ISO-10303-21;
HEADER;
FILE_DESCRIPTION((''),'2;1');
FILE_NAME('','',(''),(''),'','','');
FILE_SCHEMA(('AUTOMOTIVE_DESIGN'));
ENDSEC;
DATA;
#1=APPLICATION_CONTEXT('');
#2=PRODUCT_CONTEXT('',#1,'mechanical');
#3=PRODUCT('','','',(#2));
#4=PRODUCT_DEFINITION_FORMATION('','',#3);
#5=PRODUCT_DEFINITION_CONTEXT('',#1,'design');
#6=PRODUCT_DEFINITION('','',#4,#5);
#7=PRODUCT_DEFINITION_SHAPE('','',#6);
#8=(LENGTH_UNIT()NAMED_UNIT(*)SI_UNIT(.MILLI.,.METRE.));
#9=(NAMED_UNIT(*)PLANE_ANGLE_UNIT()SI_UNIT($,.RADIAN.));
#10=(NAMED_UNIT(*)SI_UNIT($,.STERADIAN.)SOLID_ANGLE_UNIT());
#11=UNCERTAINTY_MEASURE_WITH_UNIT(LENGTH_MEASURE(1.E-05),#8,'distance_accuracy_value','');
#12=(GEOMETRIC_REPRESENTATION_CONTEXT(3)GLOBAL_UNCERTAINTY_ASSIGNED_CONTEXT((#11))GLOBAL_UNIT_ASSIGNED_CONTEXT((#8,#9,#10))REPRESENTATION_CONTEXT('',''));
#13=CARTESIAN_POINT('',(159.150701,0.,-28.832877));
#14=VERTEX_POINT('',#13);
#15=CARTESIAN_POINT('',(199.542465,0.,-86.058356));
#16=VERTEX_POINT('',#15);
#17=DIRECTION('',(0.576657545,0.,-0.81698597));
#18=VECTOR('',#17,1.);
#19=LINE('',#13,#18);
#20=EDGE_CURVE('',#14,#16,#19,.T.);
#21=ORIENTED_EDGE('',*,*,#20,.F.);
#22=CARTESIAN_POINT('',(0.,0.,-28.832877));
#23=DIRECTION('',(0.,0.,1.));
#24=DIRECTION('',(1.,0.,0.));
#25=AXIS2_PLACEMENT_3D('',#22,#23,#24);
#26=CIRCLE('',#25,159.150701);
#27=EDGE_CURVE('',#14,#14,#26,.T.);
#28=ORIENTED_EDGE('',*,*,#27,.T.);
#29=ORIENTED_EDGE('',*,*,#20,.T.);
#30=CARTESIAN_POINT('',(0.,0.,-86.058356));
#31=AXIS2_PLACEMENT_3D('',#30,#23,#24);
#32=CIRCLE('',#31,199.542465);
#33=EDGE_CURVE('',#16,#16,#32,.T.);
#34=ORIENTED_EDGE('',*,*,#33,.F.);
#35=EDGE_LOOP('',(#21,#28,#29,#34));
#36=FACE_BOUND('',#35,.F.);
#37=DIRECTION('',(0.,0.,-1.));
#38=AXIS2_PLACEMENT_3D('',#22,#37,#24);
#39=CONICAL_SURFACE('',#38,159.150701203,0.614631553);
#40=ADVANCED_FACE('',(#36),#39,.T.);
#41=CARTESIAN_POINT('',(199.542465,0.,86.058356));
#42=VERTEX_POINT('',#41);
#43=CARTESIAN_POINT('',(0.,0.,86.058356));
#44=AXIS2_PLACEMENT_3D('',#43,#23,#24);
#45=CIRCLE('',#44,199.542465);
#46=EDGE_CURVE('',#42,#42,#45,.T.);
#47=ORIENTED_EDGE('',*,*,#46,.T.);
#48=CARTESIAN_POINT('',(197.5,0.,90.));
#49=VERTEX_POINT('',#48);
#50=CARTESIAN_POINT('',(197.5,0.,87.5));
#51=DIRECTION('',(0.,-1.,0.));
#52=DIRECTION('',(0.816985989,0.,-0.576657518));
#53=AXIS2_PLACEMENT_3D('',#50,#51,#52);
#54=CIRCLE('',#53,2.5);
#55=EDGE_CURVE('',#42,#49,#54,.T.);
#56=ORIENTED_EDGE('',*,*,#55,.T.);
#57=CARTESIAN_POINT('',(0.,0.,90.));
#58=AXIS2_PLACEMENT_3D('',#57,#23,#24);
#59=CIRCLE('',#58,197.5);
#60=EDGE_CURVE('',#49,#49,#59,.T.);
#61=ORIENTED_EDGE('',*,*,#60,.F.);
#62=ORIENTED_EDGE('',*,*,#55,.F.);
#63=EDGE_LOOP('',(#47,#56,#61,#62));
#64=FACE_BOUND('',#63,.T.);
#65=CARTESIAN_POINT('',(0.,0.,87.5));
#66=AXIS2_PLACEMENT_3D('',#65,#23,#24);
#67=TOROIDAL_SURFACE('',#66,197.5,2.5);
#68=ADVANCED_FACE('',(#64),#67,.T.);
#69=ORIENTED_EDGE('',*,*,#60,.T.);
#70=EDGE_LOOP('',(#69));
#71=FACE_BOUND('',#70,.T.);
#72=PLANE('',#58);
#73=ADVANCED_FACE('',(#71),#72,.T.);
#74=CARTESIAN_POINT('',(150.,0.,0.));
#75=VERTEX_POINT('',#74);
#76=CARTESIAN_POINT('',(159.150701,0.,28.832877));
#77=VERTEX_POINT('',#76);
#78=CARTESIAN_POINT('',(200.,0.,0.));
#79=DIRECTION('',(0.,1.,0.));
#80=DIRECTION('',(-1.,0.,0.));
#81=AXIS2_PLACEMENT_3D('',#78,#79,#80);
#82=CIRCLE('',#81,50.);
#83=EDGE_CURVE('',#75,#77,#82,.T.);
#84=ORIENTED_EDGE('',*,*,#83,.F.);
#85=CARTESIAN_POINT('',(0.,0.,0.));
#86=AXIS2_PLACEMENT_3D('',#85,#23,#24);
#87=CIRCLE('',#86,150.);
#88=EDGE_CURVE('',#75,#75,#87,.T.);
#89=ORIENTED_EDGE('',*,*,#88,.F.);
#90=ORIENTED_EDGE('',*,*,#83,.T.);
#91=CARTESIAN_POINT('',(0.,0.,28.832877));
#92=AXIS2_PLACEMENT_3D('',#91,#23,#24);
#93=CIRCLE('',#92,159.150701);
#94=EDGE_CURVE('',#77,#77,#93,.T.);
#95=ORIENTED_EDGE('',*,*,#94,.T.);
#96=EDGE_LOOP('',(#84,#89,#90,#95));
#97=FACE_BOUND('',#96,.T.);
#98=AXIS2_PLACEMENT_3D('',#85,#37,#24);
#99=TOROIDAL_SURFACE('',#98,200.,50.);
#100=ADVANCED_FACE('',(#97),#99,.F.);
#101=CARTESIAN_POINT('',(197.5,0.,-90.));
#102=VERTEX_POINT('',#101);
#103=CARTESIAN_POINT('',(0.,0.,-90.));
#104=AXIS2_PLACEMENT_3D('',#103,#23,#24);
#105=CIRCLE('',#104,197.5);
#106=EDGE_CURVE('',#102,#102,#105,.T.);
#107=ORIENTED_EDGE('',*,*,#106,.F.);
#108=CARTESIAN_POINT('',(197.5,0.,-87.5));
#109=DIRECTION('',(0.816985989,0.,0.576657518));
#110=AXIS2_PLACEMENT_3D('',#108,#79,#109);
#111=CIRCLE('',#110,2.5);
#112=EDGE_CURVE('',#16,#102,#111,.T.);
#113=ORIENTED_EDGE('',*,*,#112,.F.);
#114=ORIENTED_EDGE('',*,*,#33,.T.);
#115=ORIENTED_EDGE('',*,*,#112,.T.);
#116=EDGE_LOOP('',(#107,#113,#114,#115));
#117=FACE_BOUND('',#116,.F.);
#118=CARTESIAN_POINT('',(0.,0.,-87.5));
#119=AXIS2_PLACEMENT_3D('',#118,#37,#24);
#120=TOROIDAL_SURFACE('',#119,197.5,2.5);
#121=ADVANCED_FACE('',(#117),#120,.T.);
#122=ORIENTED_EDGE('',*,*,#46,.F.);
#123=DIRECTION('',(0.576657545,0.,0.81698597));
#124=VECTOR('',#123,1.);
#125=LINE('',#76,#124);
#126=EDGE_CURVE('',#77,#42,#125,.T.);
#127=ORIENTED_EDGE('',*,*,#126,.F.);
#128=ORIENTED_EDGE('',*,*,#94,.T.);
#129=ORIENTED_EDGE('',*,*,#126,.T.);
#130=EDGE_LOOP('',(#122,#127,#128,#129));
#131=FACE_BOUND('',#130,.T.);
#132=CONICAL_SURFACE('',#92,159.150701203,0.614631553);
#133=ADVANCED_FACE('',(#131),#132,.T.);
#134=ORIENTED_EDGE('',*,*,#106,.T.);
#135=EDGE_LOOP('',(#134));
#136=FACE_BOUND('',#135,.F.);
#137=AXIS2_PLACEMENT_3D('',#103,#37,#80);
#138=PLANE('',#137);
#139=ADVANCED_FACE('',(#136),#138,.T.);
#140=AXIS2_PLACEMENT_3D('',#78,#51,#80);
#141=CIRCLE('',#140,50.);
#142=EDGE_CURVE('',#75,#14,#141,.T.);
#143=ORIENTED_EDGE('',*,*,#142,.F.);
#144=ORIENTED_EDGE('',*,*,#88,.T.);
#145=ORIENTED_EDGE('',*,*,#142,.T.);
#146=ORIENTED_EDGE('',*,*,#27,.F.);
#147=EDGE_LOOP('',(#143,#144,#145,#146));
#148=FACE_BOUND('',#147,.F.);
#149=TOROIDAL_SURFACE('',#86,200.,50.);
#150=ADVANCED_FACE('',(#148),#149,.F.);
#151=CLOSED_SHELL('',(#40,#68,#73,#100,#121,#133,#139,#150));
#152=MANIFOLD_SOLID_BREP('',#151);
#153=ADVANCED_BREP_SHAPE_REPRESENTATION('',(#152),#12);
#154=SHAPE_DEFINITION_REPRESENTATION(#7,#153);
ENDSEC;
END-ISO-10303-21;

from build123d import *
from build123d import SkipClean  # not in build123d's __all__


# Not quite as in the source:
# - ends of sketch curves that miss each other by under 0.0002 mm in the source are joined


with BuildPart() as f1:
    # F0 (on Front) → F1 (revolve)
    with BuildSketch(Plane.XZ):
        with BuildLine():
            ThreePointArc((150, 0), (152.3425507406, 15.1250629778), (159.1507012033, 28.8328768565))
            Line((159.1507012033, 28.8328768565), (199.542465, 86.058356))
            ThreePointArc((199.542465, 86.058356), (199.7196970287, 88.6501935058), (197.5, 90))
            Line((197.5, 90), (0, 90))
            Line((0, 90), (0, 0))
            Line((0, 0), (150, 0))
        make_face()
    revolve(axis=Axis((0, 0, 45), (0, 0, 1)))

    # F2: F1 across face


with BuildPart() as f1_1:
    add(f1.part, clean=False)
    with SkipClean():  # cleaning this boolean's faces spoils the solid; the shape is the same uncleaned
        add(f1.part.mirror(Plane(origin=(0, 0, 0), x_dir=(1, 0, 0), z_dir=(0, 0, -1))), clean=False)


solid = f1_1.part
